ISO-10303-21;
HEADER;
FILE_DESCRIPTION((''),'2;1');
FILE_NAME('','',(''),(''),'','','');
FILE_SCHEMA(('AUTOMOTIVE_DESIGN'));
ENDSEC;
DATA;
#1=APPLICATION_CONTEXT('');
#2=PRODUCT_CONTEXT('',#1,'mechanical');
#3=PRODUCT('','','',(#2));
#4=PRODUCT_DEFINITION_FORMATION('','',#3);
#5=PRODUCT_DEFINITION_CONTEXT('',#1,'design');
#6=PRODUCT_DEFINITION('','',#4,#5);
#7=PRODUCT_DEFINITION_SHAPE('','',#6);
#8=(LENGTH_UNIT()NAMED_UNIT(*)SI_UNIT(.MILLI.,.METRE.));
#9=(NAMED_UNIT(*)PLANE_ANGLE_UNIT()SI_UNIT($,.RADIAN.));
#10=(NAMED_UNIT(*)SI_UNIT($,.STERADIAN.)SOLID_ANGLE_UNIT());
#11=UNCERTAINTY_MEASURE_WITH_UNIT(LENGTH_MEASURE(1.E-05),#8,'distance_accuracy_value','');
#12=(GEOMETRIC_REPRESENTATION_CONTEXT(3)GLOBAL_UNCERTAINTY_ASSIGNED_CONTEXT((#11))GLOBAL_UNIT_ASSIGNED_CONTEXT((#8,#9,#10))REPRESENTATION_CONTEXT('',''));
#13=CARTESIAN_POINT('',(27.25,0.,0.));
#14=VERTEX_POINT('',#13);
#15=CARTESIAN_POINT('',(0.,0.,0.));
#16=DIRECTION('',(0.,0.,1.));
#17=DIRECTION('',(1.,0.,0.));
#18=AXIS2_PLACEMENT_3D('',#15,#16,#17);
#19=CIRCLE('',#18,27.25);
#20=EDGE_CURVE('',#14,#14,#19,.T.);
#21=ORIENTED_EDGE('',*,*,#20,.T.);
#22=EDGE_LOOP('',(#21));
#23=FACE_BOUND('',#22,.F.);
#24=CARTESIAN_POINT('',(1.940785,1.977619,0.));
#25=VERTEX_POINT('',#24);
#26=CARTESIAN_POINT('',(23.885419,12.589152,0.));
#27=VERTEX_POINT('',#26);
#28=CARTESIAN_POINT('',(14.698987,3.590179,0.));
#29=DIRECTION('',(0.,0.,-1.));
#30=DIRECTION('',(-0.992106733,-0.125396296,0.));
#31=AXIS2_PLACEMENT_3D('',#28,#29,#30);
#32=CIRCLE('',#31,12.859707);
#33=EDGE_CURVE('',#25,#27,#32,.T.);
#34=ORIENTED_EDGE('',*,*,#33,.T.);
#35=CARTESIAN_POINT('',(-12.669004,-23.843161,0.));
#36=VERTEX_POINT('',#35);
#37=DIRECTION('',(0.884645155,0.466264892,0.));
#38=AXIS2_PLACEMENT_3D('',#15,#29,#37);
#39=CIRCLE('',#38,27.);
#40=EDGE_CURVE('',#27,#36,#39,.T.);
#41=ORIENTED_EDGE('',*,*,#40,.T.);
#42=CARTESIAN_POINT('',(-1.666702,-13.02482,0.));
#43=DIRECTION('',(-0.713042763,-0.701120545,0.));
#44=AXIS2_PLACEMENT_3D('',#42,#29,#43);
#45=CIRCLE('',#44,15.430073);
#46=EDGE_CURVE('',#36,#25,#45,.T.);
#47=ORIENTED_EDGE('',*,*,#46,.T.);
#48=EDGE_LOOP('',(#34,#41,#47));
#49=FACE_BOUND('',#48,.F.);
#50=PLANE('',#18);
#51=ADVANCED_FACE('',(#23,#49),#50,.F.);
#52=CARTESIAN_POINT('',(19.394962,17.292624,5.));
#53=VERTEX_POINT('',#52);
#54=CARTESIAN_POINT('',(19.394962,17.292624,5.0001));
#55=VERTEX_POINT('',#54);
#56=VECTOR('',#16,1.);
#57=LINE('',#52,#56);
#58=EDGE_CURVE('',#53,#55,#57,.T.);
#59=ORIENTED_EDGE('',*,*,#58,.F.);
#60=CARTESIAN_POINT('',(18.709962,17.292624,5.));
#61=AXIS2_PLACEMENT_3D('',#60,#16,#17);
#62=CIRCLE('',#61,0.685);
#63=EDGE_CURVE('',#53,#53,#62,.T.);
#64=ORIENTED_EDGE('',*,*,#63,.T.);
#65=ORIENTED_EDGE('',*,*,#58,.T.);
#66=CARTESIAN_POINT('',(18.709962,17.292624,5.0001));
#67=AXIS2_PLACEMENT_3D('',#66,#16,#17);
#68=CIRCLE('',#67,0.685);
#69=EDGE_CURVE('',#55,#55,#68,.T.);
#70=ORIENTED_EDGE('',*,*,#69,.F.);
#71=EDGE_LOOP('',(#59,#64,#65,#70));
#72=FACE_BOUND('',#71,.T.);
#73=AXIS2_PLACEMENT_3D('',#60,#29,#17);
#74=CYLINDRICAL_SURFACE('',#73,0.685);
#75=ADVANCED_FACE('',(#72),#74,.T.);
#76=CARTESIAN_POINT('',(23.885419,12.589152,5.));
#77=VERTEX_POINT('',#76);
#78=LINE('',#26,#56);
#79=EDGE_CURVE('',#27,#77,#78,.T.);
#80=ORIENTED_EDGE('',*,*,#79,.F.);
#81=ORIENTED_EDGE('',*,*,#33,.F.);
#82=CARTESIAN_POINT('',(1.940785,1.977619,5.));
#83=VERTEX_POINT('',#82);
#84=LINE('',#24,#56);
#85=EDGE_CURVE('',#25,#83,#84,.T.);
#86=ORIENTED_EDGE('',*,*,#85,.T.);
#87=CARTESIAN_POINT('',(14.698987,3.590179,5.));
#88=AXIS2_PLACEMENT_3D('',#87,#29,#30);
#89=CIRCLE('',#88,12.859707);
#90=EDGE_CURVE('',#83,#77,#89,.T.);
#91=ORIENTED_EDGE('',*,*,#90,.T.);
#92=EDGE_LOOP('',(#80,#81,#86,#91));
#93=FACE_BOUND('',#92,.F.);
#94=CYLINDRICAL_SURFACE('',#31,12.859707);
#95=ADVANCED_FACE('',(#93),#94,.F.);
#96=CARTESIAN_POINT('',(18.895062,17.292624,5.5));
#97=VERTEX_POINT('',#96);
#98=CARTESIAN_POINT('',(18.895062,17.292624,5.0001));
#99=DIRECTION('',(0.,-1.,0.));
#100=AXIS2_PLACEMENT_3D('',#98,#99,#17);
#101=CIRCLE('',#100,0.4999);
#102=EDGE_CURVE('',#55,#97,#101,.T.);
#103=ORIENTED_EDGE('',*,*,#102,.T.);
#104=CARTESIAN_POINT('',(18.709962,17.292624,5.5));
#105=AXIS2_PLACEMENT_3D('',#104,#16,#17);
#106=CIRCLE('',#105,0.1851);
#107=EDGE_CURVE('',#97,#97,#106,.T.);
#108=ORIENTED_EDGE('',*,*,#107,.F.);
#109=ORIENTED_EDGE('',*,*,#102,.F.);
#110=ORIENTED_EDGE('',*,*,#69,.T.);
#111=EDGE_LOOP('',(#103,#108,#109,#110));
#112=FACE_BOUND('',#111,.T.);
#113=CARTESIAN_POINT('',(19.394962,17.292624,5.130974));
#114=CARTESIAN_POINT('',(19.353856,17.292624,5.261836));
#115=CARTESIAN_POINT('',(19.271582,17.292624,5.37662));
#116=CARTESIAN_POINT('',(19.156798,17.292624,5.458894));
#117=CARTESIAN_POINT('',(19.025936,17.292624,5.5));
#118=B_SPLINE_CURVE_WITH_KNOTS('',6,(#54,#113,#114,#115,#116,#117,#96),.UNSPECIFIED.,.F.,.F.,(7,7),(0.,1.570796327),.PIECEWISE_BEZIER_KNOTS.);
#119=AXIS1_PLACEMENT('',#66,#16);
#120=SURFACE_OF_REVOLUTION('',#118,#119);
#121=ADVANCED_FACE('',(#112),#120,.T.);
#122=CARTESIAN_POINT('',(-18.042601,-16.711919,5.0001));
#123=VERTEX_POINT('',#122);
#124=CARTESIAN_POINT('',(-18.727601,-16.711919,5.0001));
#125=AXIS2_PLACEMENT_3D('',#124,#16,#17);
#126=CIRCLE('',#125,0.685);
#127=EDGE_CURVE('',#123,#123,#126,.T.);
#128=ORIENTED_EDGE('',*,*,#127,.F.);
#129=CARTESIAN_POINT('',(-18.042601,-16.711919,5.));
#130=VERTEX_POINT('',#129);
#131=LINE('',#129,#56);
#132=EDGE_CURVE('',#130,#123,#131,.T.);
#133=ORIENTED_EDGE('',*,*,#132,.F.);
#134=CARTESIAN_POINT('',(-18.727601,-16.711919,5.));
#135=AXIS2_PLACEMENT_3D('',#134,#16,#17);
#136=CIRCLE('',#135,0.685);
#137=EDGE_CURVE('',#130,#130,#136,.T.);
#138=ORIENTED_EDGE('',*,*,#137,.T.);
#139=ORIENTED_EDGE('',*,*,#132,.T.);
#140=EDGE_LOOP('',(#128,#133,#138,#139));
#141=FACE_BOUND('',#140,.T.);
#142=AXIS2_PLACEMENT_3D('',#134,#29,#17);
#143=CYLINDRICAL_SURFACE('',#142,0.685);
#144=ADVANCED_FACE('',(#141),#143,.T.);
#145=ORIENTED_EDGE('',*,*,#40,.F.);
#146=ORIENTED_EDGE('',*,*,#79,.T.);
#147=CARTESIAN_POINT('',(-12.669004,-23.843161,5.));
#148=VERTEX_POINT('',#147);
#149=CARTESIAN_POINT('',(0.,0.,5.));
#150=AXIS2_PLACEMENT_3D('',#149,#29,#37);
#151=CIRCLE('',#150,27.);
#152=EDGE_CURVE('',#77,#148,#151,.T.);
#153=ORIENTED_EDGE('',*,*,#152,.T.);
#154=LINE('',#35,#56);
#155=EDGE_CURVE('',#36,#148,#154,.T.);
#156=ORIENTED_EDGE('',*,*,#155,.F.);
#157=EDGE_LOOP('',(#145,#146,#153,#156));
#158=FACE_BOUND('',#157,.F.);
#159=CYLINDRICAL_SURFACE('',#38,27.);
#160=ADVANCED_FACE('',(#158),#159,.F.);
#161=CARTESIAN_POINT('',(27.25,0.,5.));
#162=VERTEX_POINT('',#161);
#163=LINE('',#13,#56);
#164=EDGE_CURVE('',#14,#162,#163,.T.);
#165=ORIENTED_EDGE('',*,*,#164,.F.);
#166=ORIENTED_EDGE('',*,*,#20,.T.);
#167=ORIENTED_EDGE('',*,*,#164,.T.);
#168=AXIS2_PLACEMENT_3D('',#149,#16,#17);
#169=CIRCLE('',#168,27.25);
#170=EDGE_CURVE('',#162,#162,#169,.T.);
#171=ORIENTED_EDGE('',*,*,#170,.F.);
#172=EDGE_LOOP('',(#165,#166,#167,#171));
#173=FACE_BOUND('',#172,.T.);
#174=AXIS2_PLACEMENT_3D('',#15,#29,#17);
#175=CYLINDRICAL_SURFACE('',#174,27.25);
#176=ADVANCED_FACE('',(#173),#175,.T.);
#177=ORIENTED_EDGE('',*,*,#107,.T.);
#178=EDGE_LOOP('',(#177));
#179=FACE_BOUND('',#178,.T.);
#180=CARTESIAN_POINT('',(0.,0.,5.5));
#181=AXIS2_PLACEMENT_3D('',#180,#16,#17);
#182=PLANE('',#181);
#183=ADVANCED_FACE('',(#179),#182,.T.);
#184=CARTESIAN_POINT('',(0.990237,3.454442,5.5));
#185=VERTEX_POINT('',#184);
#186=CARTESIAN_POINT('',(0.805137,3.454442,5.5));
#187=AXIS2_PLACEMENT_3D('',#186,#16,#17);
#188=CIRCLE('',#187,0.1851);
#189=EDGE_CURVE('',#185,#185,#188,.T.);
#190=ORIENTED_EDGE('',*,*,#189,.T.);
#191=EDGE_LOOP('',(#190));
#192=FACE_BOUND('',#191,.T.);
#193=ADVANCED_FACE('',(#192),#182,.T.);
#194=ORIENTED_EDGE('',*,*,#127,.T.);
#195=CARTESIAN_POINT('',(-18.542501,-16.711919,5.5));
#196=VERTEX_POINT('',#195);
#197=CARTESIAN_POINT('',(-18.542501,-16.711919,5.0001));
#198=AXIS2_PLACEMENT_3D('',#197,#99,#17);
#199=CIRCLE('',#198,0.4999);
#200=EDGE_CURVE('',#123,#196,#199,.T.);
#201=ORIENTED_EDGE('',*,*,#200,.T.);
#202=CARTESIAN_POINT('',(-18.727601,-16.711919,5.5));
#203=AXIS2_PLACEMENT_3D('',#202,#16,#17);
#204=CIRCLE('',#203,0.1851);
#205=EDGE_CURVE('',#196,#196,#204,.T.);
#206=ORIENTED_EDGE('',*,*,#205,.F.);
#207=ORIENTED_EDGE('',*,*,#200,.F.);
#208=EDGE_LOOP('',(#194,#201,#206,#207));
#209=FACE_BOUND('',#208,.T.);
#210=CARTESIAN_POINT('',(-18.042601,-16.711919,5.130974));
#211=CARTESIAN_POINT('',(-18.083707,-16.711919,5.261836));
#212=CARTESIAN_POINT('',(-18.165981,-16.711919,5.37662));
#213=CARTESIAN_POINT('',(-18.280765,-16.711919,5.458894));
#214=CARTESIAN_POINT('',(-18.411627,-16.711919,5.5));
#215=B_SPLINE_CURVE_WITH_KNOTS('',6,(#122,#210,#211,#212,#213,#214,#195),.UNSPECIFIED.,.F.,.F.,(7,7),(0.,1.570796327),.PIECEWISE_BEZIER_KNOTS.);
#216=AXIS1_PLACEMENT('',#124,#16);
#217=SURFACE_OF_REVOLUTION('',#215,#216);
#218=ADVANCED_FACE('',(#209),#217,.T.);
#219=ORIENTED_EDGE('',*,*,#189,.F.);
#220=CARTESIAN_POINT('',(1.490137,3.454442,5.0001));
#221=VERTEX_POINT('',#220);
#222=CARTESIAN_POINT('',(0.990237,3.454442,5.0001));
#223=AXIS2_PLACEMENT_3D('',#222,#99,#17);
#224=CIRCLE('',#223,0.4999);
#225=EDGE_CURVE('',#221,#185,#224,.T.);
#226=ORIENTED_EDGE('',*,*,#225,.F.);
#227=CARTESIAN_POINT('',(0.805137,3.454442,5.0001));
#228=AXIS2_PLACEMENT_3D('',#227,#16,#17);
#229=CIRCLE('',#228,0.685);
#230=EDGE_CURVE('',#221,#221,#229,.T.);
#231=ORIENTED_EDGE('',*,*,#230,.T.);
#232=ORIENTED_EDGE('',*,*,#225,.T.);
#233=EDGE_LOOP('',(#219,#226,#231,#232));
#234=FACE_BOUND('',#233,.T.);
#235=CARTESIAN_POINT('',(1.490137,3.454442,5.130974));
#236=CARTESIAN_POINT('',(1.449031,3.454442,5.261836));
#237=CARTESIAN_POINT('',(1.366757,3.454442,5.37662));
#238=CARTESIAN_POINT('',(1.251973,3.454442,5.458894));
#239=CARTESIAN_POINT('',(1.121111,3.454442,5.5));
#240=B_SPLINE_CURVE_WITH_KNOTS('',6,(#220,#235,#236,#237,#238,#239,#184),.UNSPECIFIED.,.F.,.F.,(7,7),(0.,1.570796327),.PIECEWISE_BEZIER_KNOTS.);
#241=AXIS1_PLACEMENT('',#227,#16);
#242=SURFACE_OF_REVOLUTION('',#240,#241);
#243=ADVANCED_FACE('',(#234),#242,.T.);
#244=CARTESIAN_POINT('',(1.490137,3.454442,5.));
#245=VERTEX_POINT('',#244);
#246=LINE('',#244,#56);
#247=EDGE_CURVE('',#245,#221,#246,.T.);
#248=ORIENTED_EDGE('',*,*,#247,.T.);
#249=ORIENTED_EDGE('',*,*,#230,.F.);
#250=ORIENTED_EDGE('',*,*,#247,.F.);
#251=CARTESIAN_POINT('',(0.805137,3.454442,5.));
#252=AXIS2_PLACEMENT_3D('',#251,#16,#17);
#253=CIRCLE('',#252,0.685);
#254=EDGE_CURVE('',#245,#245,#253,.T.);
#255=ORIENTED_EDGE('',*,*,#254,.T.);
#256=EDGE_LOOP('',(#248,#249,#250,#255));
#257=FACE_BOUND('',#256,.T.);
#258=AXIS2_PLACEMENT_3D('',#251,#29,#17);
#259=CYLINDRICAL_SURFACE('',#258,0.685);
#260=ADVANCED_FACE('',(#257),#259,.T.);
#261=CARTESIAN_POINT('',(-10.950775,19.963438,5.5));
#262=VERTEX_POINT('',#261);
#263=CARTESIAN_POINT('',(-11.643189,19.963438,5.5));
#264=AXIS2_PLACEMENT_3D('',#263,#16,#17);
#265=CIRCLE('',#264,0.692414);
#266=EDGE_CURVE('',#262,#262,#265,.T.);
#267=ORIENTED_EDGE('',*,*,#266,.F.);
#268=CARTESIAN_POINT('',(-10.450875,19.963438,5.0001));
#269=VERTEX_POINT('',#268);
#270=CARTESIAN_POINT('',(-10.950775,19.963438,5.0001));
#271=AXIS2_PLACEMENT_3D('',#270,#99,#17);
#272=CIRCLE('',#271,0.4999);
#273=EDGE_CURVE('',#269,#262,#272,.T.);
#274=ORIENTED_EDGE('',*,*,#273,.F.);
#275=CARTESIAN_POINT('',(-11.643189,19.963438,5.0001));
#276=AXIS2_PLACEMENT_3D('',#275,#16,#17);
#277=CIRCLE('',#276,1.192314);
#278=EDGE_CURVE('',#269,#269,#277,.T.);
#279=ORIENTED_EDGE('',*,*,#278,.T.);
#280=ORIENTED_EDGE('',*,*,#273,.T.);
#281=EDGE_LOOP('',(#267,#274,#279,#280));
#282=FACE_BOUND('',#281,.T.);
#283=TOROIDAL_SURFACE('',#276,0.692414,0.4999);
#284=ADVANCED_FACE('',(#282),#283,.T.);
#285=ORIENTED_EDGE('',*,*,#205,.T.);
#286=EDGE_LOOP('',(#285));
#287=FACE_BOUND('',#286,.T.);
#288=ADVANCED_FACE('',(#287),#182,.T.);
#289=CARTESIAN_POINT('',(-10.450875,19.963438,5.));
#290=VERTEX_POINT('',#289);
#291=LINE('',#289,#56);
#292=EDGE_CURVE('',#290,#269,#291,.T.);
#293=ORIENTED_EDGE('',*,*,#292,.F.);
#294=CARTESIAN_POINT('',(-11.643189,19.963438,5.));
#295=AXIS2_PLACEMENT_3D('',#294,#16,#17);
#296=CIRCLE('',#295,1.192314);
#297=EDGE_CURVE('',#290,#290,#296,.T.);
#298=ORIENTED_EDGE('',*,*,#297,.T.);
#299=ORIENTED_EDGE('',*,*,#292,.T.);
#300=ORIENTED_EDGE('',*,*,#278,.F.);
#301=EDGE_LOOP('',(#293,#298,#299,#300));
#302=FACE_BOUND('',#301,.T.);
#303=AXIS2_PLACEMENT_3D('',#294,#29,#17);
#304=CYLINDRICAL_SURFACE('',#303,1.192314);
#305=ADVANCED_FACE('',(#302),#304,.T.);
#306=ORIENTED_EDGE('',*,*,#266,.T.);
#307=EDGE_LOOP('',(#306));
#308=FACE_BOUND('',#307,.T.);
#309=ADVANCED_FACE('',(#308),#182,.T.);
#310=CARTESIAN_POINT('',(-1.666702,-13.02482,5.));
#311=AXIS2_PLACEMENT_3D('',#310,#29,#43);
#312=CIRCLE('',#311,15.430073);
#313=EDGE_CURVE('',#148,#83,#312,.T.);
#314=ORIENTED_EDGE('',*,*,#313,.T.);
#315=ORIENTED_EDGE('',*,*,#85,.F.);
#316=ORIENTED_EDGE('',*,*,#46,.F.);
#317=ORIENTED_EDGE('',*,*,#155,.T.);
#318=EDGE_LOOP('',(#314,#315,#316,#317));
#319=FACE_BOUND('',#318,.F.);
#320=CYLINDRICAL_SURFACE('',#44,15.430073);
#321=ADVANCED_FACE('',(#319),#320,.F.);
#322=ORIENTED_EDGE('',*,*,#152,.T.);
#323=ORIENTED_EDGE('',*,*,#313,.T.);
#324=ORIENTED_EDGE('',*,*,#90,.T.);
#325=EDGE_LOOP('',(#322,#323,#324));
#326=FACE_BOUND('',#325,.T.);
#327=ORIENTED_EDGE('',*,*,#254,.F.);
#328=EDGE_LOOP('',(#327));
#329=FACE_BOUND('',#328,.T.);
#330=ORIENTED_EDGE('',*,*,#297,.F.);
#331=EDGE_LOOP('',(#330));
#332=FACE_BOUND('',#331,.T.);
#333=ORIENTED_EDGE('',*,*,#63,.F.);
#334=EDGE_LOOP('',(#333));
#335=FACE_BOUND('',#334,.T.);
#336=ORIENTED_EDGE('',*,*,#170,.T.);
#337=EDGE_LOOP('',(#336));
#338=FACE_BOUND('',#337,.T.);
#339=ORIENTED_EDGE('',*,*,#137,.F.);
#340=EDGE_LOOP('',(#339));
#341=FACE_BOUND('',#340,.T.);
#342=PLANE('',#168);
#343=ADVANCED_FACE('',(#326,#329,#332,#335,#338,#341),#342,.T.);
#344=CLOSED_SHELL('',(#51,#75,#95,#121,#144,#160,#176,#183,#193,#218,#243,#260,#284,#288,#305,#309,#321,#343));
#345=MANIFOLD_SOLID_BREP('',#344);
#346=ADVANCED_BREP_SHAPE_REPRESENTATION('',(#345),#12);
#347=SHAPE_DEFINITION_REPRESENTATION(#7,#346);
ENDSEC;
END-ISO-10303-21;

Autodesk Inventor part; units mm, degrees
ref_plane "YZ Plane" through (0, 0, 0) normal (1, 0, 0) x (0, 1, 0)
ref_plane "XZ Plane" through (0, 0, 0) normal (0, 1, 0) x (-1, 0, 0)
ref_plane "XY Plane" through (0, 0, 0) normal (0, 0, 1) x (1, 0, 0)
sketch "Esquisse1" plane through (0, 0, 0) normal (0, 0, 1) x (1, 0, 0)
  circle A0 centre (0, 0) radius 27
  circle A1 centre (-1.666702, -13.02482) radius 15.430073
  circle A2 centre (14.698986, 3.590179) radius 12.859707
  circle A3 centre (0, 0) radius 27.25
  circle A4 centre (0.777883, 3.425174) radius 0.684809
  circle A5 centre (-18.340493, -16.491398) radius 0.684809
  circle A6 centre (-11.511215, 19.899288) radius 1.369619
  circle A7 centre (18.687299, 17.311193) radius 0.684809
  point P0 (1.940785, 1.977619)
  point P1 (23.885419, 12.589152)
  point P2 (-12.669004, -23.843161)
  dimension "d0" = 54
  dimension "d6" = 54.5
  dimension "d9" = 1.36962
sketch "Esquisse1 outline for Cadran" plane through (0, 0, 0) normal (0, 0, 1) x (1, 0, 0)
  circle A0 centre (0, 0) radius 27.25
  arc A1 (23.885419, 12.589152) -> (-12.669004, -23.843161) centre (0, 0) cw
  arc A2 (1.940785, 1.977619) -> (23.885419, 12.589152) centre (14.698986, 3.590179) cw
  arc A3 (-12.669004, -23.843161) -> (1.940785, 1.977619) centre (-1.666702, -13.02482) cw
extrude "Cadran" add sketch "Esquisse1 outline for Cadran" along normal blind 5
sketch "Esquisse4" plane through (0, 0, 5) normal (0, 0, 1) x (1, 0, 0)
  circle A0 centre (-11.643189, 19.963438) radius 1.192314
  circle A1 centre (0.805137, 3.454442) radius 0.685
  circle A2 centre (-18.727601, -16.711919) radius 0.685
  circle A3 centre (18.709962, 17.292624) radius 0.685
  point P0 (0, 0)
  dimension "d10" = 1.37
extrude "Emplacements Vis" add sketch "Esquisse4" along normal blind 0.5
fillet "Congé1" radius 0.5 1 edges at (18.025, 17.2926, 5.5)
fillet "Congé2" radius 0.5 1 edges at (0.1201, 3.4544, 5.5)
fillet "Congé3" radius 0.5 1 edges at (-12.8355, 19.9634, 5.5)
fillet "Congé4" radius 0.5 1 edges at (-19.4126, -16.7119, 5.5)
properties part number "Candran face cache"
